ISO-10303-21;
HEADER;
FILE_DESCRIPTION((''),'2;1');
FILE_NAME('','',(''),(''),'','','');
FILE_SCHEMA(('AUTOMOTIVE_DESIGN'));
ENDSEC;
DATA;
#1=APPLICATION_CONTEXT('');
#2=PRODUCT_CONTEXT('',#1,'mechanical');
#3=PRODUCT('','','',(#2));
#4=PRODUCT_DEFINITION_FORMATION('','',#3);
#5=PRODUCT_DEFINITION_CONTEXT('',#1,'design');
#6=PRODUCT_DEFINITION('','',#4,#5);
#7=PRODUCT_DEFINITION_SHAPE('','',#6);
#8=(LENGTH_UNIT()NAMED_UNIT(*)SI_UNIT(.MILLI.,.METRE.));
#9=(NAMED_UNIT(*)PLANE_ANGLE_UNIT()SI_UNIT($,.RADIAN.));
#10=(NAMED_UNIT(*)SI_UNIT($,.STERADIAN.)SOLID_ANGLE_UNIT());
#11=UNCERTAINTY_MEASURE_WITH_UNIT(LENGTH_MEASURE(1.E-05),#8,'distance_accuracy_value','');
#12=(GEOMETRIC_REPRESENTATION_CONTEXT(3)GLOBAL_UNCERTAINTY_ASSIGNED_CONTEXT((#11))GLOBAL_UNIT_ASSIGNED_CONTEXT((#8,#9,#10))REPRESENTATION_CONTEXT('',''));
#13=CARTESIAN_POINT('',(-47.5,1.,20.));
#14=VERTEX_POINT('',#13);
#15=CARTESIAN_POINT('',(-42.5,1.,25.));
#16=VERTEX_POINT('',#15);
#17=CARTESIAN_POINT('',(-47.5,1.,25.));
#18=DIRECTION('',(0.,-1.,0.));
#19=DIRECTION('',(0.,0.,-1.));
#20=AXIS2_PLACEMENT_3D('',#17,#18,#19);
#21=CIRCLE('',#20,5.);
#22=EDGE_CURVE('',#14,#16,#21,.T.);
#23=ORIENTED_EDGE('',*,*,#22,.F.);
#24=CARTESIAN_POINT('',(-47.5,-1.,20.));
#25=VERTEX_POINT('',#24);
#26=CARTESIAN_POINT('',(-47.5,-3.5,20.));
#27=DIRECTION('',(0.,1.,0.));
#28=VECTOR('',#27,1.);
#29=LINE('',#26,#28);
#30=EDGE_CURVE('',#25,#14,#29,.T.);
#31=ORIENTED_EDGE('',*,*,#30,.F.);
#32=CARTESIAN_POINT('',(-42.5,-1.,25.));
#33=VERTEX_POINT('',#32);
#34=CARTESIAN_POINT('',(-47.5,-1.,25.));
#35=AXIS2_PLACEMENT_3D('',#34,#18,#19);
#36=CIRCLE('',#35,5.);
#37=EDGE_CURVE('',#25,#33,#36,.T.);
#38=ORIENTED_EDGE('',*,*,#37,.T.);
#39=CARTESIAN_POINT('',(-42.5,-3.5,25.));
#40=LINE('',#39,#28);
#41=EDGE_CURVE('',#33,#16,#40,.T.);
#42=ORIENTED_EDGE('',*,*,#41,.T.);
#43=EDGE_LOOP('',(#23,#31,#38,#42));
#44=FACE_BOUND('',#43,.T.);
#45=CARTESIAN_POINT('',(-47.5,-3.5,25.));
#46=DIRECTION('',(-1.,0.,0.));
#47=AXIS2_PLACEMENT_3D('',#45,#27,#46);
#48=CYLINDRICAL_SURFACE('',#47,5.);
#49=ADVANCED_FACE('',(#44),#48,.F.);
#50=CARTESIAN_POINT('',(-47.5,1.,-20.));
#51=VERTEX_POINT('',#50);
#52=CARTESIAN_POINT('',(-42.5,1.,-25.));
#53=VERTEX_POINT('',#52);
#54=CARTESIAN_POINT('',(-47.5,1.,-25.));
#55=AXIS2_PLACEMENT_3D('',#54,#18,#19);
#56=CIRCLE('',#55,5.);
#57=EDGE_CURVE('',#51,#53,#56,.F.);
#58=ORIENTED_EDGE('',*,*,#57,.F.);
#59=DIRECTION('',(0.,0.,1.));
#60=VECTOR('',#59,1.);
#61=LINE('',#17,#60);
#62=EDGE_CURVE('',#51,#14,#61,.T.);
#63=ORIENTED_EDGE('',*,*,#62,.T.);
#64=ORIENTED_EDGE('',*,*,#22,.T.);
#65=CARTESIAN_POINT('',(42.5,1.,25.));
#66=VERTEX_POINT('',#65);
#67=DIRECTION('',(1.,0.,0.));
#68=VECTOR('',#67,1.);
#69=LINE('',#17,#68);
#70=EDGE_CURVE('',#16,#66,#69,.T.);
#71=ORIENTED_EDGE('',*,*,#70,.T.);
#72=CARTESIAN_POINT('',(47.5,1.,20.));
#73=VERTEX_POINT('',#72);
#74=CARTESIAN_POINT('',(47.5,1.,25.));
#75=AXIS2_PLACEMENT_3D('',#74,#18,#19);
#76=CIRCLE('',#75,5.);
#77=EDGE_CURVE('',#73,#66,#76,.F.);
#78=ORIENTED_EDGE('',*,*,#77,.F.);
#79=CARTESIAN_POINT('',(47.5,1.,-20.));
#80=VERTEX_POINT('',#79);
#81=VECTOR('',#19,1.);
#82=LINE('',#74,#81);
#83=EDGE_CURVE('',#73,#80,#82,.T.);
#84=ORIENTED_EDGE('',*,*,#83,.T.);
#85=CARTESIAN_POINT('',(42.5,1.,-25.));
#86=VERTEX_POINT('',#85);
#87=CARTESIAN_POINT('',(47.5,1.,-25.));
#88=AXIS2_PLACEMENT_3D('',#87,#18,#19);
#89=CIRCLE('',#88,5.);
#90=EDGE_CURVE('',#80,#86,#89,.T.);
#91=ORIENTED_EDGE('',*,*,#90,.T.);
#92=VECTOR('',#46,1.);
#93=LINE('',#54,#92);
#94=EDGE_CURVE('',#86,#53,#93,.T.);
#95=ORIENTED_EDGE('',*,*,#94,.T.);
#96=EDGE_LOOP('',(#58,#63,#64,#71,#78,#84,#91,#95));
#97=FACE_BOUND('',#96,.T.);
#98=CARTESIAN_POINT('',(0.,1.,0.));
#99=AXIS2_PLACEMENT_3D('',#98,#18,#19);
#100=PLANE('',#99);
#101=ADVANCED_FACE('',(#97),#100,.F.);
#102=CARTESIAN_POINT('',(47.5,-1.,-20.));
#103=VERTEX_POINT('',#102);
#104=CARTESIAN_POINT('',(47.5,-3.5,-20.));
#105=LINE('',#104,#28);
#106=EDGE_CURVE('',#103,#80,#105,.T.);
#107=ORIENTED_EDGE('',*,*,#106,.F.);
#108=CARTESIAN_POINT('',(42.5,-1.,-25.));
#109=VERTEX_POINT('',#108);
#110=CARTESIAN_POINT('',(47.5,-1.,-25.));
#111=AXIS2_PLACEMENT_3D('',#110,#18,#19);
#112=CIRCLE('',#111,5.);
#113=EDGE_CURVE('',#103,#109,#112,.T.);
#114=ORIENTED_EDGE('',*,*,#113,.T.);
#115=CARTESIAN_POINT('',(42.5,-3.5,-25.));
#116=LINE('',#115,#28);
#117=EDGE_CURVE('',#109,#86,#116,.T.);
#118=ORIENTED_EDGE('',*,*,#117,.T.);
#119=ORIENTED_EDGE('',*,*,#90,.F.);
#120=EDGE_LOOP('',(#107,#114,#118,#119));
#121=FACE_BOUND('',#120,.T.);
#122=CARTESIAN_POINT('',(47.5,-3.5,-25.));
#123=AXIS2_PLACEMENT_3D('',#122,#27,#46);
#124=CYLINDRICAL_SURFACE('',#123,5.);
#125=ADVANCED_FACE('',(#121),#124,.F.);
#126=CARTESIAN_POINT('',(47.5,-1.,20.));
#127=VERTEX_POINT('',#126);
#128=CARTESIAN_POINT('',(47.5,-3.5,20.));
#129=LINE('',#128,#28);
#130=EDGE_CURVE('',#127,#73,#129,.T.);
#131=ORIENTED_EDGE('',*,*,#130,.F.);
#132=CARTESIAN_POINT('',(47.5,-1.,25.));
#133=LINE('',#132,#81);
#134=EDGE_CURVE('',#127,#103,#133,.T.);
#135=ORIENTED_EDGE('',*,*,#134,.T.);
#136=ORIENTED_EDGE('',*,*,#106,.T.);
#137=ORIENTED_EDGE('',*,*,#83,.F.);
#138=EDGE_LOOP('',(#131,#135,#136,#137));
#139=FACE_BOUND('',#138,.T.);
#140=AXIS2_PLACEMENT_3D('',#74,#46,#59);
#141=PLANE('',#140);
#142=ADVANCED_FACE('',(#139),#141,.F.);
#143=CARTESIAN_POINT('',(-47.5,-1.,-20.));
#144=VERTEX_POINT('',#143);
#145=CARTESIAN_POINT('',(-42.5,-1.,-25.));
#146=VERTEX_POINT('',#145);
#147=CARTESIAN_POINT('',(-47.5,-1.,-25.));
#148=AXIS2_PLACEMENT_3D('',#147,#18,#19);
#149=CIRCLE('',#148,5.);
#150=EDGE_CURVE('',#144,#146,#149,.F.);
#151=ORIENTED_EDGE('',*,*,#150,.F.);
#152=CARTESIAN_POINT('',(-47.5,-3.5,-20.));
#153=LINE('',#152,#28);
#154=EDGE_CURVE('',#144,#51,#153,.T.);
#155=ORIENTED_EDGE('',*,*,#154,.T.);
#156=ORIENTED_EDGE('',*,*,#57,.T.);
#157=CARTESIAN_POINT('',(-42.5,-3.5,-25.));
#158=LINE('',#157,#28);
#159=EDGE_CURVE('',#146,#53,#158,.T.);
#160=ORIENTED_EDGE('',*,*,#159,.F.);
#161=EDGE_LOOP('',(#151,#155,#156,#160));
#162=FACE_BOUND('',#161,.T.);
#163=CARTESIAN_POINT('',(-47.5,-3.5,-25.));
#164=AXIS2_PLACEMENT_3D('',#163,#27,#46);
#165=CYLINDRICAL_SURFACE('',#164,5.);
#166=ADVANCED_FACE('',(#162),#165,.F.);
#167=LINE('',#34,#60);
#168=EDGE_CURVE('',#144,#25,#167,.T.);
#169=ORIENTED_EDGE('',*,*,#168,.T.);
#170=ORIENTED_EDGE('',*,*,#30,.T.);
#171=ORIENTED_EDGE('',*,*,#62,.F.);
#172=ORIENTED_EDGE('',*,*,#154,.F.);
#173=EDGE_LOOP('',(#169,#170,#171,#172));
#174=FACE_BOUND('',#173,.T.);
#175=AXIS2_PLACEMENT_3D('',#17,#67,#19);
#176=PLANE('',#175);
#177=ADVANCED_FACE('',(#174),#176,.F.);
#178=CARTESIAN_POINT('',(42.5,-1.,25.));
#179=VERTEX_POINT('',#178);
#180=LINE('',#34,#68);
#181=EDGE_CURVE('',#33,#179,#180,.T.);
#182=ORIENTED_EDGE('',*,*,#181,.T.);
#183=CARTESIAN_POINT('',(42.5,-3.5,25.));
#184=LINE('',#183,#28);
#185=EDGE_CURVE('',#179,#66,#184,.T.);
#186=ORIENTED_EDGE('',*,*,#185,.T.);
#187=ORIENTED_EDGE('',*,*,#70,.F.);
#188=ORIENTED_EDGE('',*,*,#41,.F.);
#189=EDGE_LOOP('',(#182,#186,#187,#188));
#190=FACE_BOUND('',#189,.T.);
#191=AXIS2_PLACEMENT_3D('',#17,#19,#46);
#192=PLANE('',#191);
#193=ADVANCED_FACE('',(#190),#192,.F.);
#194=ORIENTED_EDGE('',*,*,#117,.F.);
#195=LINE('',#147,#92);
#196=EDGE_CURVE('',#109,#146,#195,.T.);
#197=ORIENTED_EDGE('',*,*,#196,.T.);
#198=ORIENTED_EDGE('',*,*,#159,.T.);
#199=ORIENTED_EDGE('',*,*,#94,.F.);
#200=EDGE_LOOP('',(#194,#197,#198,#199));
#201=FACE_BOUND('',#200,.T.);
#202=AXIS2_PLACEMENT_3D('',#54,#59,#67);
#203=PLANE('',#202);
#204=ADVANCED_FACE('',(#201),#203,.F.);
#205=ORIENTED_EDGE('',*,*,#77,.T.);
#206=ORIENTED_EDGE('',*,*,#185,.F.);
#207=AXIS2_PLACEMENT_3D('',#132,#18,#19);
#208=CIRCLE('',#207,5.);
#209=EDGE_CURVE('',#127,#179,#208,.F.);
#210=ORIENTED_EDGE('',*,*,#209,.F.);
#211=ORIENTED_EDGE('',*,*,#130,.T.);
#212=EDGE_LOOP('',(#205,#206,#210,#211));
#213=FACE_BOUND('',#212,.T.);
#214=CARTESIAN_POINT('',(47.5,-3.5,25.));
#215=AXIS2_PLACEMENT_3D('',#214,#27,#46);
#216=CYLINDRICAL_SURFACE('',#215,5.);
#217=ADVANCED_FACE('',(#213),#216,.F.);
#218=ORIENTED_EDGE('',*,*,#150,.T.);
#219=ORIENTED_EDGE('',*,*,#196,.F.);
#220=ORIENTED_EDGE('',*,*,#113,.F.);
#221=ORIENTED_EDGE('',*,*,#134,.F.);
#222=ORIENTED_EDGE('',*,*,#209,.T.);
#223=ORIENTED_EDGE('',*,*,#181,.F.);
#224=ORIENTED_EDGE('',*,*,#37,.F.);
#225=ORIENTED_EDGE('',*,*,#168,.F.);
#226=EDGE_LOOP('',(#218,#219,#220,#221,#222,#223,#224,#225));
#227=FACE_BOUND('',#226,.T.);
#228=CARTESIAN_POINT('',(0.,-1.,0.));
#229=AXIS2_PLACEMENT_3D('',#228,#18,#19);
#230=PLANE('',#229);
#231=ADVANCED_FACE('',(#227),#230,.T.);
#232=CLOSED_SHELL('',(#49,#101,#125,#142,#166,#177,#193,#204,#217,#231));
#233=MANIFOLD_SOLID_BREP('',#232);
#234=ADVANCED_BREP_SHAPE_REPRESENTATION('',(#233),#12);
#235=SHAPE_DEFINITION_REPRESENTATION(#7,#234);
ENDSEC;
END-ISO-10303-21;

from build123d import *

# Parameters (mm, degrees)
SKETCH1_W           = 95
SKETCH1_H           = 50
BOSS_EXTRUDE1_DEPTH = 1
CAVITY1_START       = -1
CAVITY1_DEPTH       = 2


# Read off the part's stored shape, not the designer's step: Cavity1
with BuildPart() as part:
    # Sketch1 → Boss-Extrude1 (new, symmetric)
    with BuildSketch(Plane(origin=(0, 0, 0), x_dir=(1, 0, 0), z_dir=(0, 1, 0))):
        Rectangle(SKETCH1_W, SKETCH1_H)
    extrude(amount=BOSS_EXTRUDE1_DEPTH, both=True)

    # Cavity1 outline → Cavity1 (cut)
    with BuildSketch(Plane(origin=(0, 0, 0), x_dir=(1, 0, 0), z_dir=(0, 1, 0)).offset(CAVITY1_START)):
        with BuildLine():
            Line((47.5, -25), (47.5, -20))
            ThreePointArc((47.5, -20), (43.964466094, -21.464466094), (42.5, -25))
            Line((42.5, -25), (47.5, -25))
        make_face()
        with BuildLine():
            ThreePointArc((42.5, 25), (43.964466094, 21.464466094), (47.5, 20))
            Line((47.5, 20), (47.5, 25))
            Line((47.5, 25), (42.5, 25))
        make_face()
        with BuildLine():
            Line((-47.5, -25), (-42.5, -25))
            ThreePointArc((-42.5, -25), (-43.964466094, -21.464466094), (-47.5, -20))
            Line((-47.5, -20), (-47.5, -25))
        make_face()
        with BuildLine():
            ThreePointArc((-47.5, 20), (-43.964466094, 21.464466094), (-42.5, 25))
            Line((-42.5, 25), (-47.5, 25))
            Line((-47.5, 25), (-47.5, 20))
        make_face()
    extrude(amount=CAVITY1_DEPTH, mode=Mode.SUBTRACT)


solid = part.part
